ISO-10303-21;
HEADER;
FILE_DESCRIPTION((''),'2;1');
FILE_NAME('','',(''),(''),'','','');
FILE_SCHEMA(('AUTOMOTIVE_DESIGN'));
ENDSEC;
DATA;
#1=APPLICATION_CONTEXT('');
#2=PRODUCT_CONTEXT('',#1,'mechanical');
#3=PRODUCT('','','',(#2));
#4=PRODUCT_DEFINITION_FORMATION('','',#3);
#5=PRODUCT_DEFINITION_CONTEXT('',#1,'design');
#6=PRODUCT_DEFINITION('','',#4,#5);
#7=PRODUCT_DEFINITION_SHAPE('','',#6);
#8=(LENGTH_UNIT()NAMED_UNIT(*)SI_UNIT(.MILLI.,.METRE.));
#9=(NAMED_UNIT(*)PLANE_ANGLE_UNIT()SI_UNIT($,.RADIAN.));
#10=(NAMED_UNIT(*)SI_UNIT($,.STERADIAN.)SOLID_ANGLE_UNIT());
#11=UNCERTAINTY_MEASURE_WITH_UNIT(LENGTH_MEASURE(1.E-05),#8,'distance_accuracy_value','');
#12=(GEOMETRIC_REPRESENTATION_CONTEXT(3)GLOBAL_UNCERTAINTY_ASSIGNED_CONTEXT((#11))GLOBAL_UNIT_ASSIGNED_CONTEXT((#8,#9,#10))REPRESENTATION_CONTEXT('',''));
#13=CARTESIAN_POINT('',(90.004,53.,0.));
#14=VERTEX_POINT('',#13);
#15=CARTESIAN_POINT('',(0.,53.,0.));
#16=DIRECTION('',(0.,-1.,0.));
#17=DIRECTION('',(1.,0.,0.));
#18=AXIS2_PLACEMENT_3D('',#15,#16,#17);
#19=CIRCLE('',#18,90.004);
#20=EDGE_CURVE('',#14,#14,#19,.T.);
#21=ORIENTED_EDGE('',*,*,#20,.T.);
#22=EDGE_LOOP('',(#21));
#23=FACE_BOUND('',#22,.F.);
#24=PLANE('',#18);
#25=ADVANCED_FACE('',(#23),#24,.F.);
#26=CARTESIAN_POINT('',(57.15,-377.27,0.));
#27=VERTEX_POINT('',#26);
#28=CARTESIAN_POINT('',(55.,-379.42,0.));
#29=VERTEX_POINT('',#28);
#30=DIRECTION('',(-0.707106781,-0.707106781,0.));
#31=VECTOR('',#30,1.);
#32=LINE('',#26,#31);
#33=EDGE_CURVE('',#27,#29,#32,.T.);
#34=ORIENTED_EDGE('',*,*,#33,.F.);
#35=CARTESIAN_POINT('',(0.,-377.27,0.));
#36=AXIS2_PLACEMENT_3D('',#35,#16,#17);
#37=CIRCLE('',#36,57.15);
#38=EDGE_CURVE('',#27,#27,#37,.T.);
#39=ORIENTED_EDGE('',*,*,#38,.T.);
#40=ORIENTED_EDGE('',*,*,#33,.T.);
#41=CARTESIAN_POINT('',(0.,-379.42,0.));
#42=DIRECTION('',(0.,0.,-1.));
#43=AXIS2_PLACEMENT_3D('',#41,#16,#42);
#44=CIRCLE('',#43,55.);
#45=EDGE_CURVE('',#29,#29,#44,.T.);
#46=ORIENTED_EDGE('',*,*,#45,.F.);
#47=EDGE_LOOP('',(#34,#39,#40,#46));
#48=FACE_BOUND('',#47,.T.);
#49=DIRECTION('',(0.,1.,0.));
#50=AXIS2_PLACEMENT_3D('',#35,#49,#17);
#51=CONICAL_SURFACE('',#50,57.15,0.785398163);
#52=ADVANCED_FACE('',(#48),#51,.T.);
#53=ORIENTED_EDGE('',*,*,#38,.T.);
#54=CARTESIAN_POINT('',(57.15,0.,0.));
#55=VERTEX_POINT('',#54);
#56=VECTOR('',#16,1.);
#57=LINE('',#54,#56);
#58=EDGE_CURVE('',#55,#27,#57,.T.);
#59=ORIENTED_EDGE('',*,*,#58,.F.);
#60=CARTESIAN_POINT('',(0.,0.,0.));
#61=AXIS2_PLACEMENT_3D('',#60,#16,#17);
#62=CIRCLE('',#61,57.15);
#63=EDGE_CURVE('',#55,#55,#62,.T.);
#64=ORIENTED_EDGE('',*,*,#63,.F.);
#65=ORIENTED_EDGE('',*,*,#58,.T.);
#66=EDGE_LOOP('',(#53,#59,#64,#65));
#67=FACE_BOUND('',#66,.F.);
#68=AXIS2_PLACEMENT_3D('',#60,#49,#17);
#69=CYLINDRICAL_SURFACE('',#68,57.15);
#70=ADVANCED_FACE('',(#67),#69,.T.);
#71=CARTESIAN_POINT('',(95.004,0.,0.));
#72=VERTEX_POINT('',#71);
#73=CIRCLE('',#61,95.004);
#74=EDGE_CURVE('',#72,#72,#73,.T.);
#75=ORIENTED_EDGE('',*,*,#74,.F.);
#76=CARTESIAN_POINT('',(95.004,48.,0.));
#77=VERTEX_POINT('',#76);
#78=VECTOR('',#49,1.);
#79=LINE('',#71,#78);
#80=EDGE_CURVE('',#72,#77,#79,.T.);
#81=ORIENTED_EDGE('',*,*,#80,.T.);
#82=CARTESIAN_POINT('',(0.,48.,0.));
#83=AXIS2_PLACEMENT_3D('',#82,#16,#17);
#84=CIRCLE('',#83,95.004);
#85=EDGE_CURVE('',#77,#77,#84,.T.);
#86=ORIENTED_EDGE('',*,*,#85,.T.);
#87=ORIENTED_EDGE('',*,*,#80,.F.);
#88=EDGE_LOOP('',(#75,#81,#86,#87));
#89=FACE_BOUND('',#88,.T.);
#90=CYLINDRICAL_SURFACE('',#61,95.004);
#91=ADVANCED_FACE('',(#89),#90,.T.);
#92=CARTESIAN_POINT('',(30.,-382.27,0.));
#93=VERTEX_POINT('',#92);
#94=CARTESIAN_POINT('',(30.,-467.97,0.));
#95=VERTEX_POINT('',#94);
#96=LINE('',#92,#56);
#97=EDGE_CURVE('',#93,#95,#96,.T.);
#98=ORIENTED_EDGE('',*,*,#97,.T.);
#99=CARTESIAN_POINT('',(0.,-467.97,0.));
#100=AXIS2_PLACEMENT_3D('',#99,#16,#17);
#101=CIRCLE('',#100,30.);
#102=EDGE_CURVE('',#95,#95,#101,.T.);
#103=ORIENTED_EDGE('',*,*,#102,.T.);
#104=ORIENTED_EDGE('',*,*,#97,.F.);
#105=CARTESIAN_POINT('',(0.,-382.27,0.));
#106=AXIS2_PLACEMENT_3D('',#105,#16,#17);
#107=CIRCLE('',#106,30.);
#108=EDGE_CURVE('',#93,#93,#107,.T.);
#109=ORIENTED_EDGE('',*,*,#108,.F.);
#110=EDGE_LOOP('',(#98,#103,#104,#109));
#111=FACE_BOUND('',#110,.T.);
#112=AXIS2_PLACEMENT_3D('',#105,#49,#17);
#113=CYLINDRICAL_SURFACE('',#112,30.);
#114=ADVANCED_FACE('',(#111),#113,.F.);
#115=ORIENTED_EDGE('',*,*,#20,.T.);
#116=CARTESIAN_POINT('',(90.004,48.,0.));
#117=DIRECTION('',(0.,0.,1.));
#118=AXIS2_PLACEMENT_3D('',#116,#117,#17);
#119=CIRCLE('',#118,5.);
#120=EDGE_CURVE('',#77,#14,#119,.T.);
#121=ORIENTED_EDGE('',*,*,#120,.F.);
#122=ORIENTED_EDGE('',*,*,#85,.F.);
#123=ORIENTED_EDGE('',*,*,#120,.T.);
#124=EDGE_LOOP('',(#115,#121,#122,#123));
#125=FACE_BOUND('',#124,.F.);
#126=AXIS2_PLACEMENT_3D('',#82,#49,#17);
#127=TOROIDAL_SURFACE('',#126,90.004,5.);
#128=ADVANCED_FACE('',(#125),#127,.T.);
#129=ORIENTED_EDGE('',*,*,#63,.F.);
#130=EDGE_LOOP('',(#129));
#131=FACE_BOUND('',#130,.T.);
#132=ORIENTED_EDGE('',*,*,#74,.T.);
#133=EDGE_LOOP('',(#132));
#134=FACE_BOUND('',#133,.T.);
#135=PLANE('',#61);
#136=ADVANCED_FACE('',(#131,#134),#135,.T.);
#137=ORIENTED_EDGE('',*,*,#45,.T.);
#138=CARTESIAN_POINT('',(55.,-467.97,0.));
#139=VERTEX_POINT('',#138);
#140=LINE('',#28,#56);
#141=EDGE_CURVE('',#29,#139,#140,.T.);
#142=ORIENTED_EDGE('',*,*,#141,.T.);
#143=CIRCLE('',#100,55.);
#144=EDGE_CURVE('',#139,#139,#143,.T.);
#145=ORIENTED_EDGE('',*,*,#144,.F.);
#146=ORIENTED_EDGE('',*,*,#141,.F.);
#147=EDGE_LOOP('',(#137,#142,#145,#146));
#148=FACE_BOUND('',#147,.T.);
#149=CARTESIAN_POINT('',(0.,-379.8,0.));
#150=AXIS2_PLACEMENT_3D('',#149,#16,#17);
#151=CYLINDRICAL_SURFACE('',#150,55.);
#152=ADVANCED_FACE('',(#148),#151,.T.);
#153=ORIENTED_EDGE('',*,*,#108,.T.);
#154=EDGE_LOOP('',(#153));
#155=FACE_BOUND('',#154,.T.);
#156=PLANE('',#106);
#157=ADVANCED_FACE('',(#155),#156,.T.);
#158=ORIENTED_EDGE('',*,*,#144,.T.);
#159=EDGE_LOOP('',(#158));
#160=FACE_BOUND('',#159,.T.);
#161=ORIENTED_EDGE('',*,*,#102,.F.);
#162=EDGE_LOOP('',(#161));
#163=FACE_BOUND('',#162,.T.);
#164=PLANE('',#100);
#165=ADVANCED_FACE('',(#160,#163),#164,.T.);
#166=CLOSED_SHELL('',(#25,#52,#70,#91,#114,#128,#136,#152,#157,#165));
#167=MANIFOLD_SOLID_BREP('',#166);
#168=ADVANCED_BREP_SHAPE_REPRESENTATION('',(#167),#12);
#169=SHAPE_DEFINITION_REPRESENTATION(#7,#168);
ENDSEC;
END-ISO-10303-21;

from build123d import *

# Parameters (mm, degrees)
F0_R        = 57.15
F1_DEPTH    = 382.27
F2_R        = 95.004000019
F3_DEPTH    = 53
F4_R        = 5
F5_R        = 55
F5_R_2      = 30
F6_DEPTH    = 85.7
F7_S5_R     = 55
F7_T6_DEPTH = 82


# Not quite as in the source:
# - a fillet or chamfer that OpenCascade refuses, or shapes differently, is made with other operations: its cross-section is extruded or revolved along the edge and cut away or added


with BuildPart() as f1:
    # F0 (on Front) → F1 (new body)
    with BuildSketch(Plane.XZ):
        Circle(F0_R)
    extrude(amount=F1_DEPTH)

    # F2 (on Front) → F3 (join)
    with BuildSketch(Plane.XZ):
        Circle(F2_R)
    extrude(amount=-F3_DEPTH)

    # F4
    f4_edges = [f1.edges().sort_by_distance(p)[0] for p in [
        (-95.004, 53, 0),
    ]]
    fillet(f4_edges, radius=F4_R)

    # F5 (on face) → F6 (join)
    with BuildSketch(Plane.XZ.offset(382.27)):
        Circle(F5_R)
        Circle(F5_R_2, mode=Mode.SUBTRACT)
    extrude(amount=F6_DEPTH)

    # F7: chamfer of 5 on 1 edges, made by hand


with BuildPart() as f7_tool2:
    # F7_s3 → F7_t4 (revolve)
    with BuildSketch(Plane.XY):
        Polygon((57.15, -377.27), (52.15, -382.27), (57.15, -382.27), align=None)
    revolve(axis=Axis((0, -382.27, 0), (0, -1, 0)))

    # F7_s5 → F7_t6 (cut, symmetric)
    with BuildSketch(Plane.XZ.offset(379.8)):
        Circle(F7_S5_R)
    extrude(amount=F7_T6_DEPTH, both=True, mode=Mode.SUBTRACT)


with BuildPart() as f1_1:
    add(f1.part)

    # F7_t1: cut F7_tool2
    add(f7_tool2.part, mode=Mode.SUBTRACT)


solid = f1_1.part
